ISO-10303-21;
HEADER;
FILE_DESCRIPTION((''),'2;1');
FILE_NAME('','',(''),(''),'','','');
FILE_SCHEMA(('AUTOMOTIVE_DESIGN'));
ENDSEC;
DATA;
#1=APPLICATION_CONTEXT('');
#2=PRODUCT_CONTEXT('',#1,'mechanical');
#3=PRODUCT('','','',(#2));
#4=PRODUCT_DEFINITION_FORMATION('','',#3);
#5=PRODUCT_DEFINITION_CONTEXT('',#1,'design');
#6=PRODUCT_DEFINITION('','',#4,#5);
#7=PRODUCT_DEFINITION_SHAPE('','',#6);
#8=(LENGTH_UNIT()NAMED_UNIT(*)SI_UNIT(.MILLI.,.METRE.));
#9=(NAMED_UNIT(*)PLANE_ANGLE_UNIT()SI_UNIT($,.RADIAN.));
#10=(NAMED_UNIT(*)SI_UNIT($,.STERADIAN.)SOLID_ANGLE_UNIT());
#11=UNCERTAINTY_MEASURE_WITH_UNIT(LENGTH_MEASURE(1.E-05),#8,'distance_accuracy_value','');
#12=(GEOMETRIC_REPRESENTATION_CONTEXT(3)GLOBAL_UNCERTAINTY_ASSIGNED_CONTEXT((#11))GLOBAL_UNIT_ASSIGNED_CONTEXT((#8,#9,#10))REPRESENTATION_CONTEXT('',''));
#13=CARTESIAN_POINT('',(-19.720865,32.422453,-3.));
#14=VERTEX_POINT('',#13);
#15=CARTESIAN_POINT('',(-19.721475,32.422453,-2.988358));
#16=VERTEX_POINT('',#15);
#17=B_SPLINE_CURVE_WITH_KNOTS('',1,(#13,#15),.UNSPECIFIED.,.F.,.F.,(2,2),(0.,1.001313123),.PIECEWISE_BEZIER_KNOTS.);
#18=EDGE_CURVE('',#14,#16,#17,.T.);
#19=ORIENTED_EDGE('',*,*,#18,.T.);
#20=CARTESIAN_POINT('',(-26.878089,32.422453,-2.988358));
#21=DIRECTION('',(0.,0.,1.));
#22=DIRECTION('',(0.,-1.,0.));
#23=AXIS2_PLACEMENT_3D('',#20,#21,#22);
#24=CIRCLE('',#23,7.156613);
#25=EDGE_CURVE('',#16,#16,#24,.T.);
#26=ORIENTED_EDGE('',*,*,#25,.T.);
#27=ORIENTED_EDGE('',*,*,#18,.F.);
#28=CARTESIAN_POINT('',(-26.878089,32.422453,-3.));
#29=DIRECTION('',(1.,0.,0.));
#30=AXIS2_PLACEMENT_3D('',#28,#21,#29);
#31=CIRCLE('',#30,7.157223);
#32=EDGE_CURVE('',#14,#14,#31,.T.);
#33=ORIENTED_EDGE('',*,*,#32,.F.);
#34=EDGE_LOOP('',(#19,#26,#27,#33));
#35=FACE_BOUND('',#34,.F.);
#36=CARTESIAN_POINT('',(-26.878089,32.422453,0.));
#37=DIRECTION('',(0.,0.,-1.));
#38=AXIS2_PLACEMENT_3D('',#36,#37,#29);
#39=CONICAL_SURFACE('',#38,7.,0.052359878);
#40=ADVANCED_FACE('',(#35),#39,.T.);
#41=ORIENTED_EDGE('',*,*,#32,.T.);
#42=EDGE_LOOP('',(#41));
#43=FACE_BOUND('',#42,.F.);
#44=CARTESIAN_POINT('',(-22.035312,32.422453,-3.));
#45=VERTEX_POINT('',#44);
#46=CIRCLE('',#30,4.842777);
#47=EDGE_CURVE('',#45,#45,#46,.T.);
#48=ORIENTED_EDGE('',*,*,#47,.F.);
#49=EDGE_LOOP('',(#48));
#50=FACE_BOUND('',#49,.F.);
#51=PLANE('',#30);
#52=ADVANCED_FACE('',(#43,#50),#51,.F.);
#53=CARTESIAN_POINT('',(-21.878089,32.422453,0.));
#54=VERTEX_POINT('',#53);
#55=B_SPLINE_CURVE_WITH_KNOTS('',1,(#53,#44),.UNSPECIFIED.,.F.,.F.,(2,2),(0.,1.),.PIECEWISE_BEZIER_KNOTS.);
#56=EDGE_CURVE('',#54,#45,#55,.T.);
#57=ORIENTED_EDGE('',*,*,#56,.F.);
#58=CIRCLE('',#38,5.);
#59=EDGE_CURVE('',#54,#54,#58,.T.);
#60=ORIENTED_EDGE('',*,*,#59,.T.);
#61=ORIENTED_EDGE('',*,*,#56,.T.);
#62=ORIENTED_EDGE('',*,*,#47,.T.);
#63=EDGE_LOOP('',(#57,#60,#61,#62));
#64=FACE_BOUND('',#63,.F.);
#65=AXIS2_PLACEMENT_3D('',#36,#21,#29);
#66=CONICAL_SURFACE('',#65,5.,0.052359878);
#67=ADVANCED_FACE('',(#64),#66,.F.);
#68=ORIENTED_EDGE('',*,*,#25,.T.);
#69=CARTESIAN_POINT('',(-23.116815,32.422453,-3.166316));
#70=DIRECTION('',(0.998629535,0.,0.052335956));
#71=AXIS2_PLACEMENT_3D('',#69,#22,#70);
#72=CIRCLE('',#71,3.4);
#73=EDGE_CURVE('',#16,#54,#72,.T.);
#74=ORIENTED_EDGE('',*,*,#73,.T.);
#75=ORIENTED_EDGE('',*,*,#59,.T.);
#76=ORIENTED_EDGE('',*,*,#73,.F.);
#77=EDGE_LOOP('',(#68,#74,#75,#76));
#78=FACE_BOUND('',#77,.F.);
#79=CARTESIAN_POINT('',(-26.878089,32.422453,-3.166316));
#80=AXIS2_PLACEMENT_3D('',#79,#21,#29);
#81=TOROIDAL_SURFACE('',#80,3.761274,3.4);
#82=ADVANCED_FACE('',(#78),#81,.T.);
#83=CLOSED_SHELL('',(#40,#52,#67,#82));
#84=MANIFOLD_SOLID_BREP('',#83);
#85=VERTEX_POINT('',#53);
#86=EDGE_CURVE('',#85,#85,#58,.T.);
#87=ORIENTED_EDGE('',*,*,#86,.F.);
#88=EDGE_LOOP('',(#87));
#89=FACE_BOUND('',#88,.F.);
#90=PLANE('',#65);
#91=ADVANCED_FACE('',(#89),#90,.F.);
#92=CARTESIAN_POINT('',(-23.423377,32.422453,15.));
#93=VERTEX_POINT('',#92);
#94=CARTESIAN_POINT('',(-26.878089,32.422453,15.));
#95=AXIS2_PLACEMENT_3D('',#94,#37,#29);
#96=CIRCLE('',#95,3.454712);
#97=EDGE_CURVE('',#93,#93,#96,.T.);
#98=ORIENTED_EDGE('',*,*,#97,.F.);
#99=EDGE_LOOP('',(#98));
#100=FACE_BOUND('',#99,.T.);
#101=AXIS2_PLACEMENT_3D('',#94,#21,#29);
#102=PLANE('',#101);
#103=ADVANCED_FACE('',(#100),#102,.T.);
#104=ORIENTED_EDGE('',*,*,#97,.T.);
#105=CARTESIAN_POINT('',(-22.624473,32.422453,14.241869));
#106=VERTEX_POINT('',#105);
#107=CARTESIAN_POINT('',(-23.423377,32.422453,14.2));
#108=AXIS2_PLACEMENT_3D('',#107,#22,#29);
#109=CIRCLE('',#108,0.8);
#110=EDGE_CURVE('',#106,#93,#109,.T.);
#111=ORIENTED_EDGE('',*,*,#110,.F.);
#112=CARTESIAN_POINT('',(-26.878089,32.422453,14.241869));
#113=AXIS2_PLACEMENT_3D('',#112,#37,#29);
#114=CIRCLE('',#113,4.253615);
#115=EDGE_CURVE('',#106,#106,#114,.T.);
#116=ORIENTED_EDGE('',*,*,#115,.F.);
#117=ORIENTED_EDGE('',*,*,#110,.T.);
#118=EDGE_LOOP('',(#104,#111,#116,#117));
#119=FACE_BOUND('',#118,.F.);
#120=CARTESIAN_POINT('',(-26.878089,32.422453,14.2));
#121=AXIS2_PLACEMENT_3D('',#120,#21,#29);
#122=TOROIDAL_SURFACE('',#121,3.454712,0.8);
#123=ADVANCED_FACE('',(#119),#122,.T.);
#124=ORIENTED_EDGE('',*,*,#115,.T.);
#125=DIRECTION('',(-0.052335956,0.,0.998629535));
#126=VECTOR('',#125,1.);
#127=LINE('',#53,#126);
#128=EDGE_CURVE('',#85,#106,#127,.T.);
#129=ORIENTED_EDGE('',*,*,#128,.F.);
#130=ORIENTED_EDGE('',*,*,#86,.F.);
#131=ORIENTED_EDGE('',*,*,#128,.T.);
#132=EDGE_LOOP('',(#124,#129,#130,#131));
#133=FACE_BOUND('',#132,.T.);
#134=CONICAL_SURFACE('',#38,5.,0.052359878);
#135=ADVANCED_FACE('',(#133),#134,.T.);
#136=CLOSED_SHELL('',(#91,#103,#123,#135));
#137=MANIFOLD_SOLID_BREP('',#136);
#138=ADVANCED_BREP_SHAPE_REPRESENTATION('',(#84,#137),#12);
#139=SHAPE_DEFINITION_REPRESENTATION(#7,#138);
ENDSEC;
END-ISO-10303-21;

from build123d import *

# Parameters (mm, degrees)
F0_R     = 5
F1_DEPTH = 15
F1_TAPER = 3
F0_R_2   = 7
F2_DEPTH = 4
F2_TAPER = 3
F3_R     = 0.8
F5_DEPTH = 3
F5_TAPER = -3


# Not quite as in the source:
# - a fillet or chamfer that OpenCascade refuses, or shapes differently, is made with other operations: its cross-section is extruded or revolved along the edge and cut away or added


with BuildPart() as f1:
    # F0 (on Top) → F1 (new body)
    with BuildSketch(Plane.XY):
        with Locations((-26.8780887127, 32.4224531651)):
            Circle(F0_R)
    extrude(amount=F1_DEPTH, taper=F1_TAPER)

    # F3
    f3_edges = [f1.edges().sort_by_distance(p)[0] for p in [
        (-31.091972, 32.422453, 15),
    ]]
    fillet(f3_edges, radius=F3_R)


with BuildPart() as f2:
    # F0 (on Top) → F2 (new body)
    with BuildSketch(Plane.XY):
        with Locations((-26.8780887127, 32.4224531651)):
            Circle(F0_R_2)
        with Locations((-26.8780887127, 32.4224531651)):
            Circle(F0_R, mode=Mode.SUBTRACT)
    extrude(amount=F2_DEPTH, taper=F2_TAPER)


with BuildPart() as f5:
    # F0 (on Top) → F5 (new body)
    with BuildSketch(Plane.XY):
        with Locations((-26.8780887127, 32.4224531651)):
            Circle(F0_R_2)
        with Locations((-26.8780887127, 32.4224531651)):
            Circle(F0_R, mode=Mode.SUBTRACT)
    extrude(amount=-F5_DEPTH, taper=F5_TAPER)

    # F6: fillet of radius 3.4 on 1 edges, made by hand

    # F6_s1 → F6_t2 (revolve, cut)
    with BuildSketch(Plane.XZ.offset(-32.4224531651)):
        with BuildLine():
            ThreePointArc((-19.7214746815, -2.9883737372), (-20.3597807896, -1.1766522446), (-21.8780887127, 0))
            Line((-21.8780887127, 0), (-21.853314185, 0.0633263198))
            ThreePointArc((-21.853314185, 0.0633263198), (-20.8780887127, 0.068), (-19.8780887127, 0.068))
            Line((-19.8780887127, 0.068), (-19.8101819043, 0.003558845))
            Line((-19.8101819043, 0.003558845), (-19.6535678731, -2.9848148921))
            Line((-19.6535678731, -2.9848148921), (-19.7214746815, -2.9883737372))
        make_face()
    revolve(axis=Axis((-26.8780887127, 32.4224531651, 0), (0, 0, -1)), mode=Mode.SUBTRACT)


solid = Compound([f1.part, f5.part])
